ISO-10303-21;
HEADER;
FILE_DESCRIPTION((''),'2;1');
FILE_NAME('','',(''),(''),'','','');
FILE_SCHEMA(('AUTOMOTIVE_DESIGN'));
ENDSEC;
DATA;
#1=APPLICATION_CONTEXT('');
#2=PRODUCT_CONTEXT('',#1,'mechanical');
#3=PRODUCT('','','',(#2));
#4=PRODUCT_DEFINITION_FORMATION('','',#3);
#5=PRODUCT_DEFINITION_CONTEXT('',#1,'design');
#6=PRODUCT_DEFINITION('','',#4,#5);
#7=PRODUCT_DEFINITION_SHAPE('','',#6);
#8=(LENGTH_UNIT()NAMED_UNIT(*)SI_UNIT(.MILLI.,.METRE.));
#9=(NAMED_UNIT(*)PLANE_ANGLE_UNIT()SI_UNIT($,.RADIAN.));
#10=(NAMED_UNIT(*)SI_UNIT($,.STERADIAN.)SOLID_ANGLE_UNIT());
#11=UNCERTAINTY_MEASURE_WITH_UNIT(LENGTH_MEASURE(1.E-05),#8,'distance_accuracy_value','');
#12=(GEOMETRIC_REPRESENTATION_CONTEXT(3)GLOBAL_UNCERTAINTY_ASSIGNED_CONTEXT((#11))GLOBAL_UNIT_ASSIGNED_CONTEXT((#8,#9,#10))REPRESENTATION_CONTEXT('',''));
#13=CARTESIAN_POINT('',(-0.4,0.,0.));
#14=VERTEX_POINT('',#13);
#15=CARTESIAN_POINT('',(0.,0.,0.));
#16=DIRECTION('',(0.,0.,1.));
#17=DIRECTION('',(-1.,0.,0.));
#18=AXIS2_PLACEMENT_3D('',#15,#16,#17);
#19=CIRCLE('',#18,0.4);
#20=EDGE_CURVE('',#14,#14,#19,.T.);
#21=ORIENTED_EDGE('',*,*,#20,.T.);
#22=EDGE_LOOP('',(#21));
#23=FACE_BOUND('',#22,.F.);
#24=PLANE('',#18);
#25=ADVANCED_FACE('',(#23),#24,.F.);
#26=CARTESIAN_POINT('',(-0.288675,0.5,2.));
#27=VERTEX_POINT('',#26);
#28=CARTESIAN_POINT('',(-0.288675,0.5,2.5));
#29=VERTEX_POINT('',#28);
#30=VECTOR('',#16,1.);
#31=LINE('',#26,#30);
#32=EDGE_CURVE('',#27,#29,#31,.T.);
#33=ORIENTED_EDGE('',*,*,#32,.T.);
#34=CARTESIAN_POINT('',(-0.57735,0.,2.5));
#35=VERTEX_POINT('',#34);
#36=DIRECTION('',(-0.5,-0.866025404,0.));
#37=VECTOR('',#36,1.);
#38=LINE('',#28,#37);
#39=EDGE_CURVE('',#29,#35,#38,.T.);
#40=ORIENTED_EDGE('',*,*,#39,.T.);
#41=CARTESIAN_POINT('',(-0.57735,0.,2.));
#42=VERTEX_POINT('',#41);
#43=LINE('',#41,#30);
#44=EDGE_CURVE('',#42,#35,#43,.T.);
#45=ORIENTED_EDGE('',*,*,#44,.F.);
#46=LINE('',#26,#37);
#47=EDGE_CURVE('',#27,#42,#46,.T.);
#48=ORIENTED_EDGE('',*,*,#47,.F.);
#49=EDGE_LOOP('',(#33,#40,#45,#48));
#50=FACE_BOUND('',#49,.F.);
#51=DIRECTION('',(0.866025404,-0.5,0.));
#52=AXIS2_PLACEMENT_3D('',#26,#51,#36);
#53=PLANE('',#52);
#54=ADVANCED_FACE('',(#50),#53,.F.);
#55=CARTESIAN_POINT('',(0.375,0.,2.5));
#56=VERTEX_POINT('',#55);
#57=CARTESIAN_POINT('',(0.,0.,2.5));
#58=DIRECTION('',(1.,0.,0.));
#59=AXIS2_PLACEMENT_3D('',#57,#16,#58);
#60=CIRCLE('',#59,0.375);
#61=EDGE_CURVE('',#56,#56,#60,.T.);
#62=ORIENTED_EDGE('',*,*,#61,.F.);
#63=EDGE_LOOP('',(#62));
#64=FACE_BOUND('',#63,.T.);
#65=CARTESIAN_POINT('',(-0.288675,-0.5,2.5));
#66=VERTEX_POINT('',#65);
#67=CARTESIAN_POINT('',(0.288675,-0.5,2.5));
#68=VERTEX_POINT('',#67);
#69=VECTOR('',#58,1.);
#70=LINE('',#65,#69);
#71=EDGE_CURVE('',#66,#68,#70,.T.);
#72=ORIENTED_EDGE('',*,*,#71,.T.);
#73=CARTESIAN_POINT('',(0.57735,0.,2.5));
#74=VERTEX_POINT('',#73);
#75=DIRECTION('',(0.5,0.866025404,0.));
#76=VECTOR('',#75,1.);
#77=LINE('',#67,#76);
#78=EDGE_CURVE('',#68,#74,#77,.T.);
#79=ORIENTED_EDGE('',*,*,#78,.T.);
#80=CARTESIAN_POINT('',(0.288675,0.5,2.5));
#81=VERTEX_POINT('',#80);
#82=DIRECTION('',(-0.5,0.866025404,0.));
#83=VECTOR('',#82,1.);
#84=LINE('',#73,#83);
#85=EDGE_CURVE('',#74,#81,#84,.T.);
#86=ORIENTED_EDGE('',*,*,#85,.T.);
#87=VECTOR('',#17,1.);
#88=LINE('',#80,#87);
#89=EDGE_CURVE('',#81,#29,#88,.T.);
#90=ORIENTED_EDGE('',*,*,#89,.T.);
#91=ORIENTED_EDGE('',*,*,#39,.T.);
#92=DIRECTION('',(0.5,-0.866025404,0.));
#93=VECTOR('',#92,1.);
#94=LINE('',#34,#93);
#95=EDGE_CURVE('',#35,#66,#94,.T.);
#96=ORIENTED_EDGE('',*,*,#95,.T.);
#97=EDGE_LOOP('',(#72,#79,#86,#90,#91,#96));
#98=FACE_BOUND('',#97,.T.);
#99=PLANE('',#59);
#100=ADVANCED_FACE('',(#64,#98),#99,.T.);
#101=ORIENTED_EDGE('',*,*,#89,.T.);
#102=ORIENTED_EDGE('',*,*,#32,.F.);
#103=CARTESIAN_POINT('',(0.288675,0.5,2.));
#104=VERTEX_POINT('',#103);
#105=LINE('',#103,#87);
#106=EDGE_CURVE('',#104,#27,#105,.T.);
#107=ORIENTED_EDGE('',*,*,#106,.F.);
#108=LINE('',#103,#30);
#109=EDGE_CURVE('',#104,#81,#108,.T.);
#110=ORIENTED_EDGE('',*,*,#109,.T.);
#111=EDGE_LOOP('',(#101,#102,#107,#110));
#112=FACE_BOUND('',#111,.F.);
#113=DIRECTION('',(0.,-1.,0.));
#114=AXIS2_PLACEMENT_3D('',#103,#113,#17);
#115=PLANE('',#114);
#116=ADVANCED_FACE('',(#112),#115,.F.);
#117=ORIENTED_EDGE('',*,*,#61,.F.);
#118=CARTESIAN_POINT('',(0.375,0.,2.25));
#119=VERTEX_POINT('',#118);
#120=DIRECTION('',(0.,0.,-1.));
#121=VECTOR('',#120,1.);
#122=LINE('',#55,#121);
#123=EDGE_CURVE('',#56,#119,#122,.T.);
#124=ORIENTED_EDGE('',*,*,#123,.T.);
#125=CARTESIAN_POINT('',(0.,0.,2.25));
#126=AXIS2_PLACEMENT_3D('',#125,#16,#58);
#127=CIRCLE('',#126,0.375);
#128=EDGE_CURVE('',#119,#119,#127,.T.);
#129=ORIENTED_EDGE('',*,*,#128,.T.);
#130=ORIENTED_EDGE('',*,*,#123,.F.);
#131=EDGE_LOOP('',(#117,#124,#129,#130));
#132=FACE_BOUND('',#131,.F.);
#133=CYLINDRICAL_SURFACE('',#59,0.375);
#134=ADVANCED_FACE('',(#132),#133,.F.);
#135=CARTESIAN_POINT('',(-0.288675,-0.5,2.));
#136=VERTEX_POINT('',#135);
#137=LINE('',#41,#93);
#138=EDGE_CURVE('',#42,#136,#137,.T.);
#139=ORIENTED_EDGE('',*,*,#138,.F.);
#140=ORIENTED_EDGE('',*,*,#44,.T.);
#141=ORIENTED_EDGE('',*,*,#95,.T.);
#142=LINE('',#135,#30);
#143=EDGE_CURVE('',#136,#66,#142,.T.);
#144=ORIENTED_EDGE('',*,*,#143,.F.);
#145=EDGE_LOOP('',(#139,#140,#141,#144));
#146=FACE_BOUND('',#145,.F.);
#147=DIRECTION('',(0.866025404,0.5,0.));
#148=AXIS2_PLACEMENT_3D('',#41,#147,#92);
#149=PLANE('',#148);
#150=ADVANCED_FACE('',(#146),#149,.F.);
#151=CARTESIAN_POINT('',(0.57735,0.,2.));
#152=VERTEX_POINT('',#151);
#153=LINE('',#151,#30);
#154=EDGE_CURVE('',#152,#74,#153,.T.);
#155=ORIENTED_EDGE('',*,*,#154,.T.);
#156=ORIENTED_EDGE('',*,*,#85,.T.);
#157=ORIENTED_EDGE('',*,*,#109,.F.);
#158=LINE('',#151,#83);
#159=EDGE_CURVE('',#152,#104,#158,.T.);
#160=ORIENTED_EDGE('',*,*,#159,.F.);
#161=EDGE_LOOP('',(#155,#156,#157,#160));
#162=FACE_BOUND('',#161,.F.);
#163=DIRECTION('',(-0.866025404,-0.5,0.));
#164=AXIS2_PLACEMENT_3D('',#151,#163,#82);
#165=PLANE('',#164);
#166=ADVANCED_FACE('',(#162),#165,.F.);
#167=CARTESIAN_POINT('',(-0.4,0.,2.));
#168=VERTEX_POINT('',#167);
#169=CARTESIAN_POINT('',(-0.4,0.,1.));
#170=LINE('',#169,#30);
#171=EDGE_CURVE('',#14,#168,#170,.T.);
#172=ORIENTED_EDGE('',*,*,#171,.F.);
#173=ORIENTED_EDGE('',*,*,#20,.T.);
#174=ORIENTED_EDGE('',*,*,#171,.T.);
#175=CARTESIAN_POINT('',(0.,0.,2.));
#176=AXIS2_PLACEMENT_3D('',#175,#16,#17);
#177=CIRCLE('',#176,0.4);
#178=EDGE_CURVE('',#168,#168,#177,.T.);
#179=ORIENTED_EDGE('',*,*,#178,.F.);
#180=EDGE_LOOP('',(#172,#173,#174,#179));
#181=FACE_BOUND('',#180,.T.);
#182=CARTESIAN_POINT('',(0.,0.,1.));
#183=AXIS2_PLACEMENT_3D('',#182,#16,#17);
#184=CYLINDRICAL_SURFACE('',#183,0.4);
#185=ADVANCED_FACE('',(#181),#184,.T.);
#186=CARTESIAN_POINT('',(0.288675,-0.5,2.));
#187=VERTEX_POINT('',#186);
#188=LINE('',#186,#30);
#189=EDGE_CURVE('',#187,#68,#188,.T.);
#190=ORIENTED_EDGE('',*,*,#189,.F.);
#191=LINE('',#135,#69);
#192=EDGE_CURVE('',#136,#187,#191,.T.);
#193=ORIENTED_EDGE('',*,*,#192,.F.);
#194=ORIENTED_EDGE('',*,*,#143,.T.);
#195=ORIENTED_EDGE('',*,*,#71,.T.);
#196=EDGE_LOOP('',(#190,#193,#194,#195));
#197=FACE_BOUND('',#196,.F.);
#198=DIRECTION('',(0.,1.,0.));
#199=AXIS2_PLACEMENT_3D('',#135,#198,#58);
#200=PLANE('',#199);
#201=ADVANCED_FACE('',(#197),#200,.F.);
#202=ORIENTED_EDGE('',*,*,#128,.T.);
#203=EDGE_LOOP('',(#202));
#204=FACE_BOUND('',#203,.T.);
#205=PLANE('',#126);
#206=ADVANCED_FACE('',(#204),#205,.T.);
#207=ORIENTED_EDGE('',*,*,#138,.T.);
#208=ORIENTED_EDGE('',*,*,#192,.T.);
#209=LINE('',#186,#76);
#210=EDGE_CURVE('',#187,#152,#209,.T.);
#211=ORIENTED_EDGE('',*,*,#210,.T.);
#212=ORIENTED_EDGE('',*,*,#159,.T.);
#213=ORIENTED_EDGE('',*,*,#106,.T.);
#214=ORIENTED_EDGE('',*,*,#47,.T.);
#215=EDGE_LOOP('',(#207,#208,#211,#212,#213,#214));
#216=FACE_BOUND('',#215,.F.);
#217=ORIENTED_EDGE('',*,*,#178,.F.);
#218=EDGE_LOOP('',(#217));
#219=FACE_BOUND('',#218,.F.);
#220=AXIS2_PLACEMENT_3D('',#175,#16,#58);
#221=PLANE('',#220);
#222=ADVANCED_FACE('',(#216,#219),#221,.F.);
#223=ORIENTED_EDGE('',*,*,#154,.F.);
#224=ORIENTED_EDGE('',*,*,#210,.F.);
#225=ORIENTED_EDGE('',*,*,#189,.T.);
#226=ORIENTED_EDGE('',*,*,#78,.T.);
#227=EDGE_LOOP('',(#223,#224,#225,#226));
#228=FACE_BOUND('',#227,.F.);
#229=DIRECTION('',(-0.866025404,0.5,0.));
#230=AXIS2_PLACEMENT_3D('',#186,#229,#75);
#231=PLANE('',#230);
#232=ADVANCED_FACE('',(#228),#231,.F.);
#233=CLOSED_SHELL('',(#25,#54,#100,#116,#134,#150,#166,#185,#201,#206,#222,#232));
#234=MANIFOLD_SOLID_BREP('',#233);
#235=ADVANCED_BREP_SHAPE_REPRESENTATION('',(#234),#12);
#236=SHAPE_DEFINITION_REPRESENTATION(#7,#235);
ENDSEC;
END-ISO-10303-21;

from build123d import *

# Parameters (mm, degrees)
F0_W     = 0.4
F0_H     = 2
F2_R     = 0.4
F3_DEPTH = 0.5
F4_R     = 0.375
F5_DEPTH = 0.25


with BuildPart() as f1:
    # F0 (on Front) → F1 (revolve)
    with BuildSketch(Plane.XZ):
        with Locations((-0.2, 1)):
            Rectangle(F0_W, F0_H)
    revolve(axis=Axis((0, 0, 1), (0, 0, 1)))

    # F2 (on face) → F3 (join)
    with BuildSketch(Plane.XY.offset(2)):
        Polygon((0.2886751346, 0.5), (-0.2886751346, 0.5), (-0.5773502692, 0), (-0.2886751346, -0.5), (0.2886751346, -0.5), (0.5773502692, 0), align=None)
        Circle(F2_R, mode=Mode.SUBTRACT)
        Circle(F2_R)
    extrude(amount=F3_DEPTH)

    # F4 (on face) → F5 (cut)
    with BuildSketch(Plane.XY.offset(2.5)):
        Circle(F4_R)
    extrude(amount=-F5_DEPTH, mode=Mode.SUBTRACT)


solid = f1.part
